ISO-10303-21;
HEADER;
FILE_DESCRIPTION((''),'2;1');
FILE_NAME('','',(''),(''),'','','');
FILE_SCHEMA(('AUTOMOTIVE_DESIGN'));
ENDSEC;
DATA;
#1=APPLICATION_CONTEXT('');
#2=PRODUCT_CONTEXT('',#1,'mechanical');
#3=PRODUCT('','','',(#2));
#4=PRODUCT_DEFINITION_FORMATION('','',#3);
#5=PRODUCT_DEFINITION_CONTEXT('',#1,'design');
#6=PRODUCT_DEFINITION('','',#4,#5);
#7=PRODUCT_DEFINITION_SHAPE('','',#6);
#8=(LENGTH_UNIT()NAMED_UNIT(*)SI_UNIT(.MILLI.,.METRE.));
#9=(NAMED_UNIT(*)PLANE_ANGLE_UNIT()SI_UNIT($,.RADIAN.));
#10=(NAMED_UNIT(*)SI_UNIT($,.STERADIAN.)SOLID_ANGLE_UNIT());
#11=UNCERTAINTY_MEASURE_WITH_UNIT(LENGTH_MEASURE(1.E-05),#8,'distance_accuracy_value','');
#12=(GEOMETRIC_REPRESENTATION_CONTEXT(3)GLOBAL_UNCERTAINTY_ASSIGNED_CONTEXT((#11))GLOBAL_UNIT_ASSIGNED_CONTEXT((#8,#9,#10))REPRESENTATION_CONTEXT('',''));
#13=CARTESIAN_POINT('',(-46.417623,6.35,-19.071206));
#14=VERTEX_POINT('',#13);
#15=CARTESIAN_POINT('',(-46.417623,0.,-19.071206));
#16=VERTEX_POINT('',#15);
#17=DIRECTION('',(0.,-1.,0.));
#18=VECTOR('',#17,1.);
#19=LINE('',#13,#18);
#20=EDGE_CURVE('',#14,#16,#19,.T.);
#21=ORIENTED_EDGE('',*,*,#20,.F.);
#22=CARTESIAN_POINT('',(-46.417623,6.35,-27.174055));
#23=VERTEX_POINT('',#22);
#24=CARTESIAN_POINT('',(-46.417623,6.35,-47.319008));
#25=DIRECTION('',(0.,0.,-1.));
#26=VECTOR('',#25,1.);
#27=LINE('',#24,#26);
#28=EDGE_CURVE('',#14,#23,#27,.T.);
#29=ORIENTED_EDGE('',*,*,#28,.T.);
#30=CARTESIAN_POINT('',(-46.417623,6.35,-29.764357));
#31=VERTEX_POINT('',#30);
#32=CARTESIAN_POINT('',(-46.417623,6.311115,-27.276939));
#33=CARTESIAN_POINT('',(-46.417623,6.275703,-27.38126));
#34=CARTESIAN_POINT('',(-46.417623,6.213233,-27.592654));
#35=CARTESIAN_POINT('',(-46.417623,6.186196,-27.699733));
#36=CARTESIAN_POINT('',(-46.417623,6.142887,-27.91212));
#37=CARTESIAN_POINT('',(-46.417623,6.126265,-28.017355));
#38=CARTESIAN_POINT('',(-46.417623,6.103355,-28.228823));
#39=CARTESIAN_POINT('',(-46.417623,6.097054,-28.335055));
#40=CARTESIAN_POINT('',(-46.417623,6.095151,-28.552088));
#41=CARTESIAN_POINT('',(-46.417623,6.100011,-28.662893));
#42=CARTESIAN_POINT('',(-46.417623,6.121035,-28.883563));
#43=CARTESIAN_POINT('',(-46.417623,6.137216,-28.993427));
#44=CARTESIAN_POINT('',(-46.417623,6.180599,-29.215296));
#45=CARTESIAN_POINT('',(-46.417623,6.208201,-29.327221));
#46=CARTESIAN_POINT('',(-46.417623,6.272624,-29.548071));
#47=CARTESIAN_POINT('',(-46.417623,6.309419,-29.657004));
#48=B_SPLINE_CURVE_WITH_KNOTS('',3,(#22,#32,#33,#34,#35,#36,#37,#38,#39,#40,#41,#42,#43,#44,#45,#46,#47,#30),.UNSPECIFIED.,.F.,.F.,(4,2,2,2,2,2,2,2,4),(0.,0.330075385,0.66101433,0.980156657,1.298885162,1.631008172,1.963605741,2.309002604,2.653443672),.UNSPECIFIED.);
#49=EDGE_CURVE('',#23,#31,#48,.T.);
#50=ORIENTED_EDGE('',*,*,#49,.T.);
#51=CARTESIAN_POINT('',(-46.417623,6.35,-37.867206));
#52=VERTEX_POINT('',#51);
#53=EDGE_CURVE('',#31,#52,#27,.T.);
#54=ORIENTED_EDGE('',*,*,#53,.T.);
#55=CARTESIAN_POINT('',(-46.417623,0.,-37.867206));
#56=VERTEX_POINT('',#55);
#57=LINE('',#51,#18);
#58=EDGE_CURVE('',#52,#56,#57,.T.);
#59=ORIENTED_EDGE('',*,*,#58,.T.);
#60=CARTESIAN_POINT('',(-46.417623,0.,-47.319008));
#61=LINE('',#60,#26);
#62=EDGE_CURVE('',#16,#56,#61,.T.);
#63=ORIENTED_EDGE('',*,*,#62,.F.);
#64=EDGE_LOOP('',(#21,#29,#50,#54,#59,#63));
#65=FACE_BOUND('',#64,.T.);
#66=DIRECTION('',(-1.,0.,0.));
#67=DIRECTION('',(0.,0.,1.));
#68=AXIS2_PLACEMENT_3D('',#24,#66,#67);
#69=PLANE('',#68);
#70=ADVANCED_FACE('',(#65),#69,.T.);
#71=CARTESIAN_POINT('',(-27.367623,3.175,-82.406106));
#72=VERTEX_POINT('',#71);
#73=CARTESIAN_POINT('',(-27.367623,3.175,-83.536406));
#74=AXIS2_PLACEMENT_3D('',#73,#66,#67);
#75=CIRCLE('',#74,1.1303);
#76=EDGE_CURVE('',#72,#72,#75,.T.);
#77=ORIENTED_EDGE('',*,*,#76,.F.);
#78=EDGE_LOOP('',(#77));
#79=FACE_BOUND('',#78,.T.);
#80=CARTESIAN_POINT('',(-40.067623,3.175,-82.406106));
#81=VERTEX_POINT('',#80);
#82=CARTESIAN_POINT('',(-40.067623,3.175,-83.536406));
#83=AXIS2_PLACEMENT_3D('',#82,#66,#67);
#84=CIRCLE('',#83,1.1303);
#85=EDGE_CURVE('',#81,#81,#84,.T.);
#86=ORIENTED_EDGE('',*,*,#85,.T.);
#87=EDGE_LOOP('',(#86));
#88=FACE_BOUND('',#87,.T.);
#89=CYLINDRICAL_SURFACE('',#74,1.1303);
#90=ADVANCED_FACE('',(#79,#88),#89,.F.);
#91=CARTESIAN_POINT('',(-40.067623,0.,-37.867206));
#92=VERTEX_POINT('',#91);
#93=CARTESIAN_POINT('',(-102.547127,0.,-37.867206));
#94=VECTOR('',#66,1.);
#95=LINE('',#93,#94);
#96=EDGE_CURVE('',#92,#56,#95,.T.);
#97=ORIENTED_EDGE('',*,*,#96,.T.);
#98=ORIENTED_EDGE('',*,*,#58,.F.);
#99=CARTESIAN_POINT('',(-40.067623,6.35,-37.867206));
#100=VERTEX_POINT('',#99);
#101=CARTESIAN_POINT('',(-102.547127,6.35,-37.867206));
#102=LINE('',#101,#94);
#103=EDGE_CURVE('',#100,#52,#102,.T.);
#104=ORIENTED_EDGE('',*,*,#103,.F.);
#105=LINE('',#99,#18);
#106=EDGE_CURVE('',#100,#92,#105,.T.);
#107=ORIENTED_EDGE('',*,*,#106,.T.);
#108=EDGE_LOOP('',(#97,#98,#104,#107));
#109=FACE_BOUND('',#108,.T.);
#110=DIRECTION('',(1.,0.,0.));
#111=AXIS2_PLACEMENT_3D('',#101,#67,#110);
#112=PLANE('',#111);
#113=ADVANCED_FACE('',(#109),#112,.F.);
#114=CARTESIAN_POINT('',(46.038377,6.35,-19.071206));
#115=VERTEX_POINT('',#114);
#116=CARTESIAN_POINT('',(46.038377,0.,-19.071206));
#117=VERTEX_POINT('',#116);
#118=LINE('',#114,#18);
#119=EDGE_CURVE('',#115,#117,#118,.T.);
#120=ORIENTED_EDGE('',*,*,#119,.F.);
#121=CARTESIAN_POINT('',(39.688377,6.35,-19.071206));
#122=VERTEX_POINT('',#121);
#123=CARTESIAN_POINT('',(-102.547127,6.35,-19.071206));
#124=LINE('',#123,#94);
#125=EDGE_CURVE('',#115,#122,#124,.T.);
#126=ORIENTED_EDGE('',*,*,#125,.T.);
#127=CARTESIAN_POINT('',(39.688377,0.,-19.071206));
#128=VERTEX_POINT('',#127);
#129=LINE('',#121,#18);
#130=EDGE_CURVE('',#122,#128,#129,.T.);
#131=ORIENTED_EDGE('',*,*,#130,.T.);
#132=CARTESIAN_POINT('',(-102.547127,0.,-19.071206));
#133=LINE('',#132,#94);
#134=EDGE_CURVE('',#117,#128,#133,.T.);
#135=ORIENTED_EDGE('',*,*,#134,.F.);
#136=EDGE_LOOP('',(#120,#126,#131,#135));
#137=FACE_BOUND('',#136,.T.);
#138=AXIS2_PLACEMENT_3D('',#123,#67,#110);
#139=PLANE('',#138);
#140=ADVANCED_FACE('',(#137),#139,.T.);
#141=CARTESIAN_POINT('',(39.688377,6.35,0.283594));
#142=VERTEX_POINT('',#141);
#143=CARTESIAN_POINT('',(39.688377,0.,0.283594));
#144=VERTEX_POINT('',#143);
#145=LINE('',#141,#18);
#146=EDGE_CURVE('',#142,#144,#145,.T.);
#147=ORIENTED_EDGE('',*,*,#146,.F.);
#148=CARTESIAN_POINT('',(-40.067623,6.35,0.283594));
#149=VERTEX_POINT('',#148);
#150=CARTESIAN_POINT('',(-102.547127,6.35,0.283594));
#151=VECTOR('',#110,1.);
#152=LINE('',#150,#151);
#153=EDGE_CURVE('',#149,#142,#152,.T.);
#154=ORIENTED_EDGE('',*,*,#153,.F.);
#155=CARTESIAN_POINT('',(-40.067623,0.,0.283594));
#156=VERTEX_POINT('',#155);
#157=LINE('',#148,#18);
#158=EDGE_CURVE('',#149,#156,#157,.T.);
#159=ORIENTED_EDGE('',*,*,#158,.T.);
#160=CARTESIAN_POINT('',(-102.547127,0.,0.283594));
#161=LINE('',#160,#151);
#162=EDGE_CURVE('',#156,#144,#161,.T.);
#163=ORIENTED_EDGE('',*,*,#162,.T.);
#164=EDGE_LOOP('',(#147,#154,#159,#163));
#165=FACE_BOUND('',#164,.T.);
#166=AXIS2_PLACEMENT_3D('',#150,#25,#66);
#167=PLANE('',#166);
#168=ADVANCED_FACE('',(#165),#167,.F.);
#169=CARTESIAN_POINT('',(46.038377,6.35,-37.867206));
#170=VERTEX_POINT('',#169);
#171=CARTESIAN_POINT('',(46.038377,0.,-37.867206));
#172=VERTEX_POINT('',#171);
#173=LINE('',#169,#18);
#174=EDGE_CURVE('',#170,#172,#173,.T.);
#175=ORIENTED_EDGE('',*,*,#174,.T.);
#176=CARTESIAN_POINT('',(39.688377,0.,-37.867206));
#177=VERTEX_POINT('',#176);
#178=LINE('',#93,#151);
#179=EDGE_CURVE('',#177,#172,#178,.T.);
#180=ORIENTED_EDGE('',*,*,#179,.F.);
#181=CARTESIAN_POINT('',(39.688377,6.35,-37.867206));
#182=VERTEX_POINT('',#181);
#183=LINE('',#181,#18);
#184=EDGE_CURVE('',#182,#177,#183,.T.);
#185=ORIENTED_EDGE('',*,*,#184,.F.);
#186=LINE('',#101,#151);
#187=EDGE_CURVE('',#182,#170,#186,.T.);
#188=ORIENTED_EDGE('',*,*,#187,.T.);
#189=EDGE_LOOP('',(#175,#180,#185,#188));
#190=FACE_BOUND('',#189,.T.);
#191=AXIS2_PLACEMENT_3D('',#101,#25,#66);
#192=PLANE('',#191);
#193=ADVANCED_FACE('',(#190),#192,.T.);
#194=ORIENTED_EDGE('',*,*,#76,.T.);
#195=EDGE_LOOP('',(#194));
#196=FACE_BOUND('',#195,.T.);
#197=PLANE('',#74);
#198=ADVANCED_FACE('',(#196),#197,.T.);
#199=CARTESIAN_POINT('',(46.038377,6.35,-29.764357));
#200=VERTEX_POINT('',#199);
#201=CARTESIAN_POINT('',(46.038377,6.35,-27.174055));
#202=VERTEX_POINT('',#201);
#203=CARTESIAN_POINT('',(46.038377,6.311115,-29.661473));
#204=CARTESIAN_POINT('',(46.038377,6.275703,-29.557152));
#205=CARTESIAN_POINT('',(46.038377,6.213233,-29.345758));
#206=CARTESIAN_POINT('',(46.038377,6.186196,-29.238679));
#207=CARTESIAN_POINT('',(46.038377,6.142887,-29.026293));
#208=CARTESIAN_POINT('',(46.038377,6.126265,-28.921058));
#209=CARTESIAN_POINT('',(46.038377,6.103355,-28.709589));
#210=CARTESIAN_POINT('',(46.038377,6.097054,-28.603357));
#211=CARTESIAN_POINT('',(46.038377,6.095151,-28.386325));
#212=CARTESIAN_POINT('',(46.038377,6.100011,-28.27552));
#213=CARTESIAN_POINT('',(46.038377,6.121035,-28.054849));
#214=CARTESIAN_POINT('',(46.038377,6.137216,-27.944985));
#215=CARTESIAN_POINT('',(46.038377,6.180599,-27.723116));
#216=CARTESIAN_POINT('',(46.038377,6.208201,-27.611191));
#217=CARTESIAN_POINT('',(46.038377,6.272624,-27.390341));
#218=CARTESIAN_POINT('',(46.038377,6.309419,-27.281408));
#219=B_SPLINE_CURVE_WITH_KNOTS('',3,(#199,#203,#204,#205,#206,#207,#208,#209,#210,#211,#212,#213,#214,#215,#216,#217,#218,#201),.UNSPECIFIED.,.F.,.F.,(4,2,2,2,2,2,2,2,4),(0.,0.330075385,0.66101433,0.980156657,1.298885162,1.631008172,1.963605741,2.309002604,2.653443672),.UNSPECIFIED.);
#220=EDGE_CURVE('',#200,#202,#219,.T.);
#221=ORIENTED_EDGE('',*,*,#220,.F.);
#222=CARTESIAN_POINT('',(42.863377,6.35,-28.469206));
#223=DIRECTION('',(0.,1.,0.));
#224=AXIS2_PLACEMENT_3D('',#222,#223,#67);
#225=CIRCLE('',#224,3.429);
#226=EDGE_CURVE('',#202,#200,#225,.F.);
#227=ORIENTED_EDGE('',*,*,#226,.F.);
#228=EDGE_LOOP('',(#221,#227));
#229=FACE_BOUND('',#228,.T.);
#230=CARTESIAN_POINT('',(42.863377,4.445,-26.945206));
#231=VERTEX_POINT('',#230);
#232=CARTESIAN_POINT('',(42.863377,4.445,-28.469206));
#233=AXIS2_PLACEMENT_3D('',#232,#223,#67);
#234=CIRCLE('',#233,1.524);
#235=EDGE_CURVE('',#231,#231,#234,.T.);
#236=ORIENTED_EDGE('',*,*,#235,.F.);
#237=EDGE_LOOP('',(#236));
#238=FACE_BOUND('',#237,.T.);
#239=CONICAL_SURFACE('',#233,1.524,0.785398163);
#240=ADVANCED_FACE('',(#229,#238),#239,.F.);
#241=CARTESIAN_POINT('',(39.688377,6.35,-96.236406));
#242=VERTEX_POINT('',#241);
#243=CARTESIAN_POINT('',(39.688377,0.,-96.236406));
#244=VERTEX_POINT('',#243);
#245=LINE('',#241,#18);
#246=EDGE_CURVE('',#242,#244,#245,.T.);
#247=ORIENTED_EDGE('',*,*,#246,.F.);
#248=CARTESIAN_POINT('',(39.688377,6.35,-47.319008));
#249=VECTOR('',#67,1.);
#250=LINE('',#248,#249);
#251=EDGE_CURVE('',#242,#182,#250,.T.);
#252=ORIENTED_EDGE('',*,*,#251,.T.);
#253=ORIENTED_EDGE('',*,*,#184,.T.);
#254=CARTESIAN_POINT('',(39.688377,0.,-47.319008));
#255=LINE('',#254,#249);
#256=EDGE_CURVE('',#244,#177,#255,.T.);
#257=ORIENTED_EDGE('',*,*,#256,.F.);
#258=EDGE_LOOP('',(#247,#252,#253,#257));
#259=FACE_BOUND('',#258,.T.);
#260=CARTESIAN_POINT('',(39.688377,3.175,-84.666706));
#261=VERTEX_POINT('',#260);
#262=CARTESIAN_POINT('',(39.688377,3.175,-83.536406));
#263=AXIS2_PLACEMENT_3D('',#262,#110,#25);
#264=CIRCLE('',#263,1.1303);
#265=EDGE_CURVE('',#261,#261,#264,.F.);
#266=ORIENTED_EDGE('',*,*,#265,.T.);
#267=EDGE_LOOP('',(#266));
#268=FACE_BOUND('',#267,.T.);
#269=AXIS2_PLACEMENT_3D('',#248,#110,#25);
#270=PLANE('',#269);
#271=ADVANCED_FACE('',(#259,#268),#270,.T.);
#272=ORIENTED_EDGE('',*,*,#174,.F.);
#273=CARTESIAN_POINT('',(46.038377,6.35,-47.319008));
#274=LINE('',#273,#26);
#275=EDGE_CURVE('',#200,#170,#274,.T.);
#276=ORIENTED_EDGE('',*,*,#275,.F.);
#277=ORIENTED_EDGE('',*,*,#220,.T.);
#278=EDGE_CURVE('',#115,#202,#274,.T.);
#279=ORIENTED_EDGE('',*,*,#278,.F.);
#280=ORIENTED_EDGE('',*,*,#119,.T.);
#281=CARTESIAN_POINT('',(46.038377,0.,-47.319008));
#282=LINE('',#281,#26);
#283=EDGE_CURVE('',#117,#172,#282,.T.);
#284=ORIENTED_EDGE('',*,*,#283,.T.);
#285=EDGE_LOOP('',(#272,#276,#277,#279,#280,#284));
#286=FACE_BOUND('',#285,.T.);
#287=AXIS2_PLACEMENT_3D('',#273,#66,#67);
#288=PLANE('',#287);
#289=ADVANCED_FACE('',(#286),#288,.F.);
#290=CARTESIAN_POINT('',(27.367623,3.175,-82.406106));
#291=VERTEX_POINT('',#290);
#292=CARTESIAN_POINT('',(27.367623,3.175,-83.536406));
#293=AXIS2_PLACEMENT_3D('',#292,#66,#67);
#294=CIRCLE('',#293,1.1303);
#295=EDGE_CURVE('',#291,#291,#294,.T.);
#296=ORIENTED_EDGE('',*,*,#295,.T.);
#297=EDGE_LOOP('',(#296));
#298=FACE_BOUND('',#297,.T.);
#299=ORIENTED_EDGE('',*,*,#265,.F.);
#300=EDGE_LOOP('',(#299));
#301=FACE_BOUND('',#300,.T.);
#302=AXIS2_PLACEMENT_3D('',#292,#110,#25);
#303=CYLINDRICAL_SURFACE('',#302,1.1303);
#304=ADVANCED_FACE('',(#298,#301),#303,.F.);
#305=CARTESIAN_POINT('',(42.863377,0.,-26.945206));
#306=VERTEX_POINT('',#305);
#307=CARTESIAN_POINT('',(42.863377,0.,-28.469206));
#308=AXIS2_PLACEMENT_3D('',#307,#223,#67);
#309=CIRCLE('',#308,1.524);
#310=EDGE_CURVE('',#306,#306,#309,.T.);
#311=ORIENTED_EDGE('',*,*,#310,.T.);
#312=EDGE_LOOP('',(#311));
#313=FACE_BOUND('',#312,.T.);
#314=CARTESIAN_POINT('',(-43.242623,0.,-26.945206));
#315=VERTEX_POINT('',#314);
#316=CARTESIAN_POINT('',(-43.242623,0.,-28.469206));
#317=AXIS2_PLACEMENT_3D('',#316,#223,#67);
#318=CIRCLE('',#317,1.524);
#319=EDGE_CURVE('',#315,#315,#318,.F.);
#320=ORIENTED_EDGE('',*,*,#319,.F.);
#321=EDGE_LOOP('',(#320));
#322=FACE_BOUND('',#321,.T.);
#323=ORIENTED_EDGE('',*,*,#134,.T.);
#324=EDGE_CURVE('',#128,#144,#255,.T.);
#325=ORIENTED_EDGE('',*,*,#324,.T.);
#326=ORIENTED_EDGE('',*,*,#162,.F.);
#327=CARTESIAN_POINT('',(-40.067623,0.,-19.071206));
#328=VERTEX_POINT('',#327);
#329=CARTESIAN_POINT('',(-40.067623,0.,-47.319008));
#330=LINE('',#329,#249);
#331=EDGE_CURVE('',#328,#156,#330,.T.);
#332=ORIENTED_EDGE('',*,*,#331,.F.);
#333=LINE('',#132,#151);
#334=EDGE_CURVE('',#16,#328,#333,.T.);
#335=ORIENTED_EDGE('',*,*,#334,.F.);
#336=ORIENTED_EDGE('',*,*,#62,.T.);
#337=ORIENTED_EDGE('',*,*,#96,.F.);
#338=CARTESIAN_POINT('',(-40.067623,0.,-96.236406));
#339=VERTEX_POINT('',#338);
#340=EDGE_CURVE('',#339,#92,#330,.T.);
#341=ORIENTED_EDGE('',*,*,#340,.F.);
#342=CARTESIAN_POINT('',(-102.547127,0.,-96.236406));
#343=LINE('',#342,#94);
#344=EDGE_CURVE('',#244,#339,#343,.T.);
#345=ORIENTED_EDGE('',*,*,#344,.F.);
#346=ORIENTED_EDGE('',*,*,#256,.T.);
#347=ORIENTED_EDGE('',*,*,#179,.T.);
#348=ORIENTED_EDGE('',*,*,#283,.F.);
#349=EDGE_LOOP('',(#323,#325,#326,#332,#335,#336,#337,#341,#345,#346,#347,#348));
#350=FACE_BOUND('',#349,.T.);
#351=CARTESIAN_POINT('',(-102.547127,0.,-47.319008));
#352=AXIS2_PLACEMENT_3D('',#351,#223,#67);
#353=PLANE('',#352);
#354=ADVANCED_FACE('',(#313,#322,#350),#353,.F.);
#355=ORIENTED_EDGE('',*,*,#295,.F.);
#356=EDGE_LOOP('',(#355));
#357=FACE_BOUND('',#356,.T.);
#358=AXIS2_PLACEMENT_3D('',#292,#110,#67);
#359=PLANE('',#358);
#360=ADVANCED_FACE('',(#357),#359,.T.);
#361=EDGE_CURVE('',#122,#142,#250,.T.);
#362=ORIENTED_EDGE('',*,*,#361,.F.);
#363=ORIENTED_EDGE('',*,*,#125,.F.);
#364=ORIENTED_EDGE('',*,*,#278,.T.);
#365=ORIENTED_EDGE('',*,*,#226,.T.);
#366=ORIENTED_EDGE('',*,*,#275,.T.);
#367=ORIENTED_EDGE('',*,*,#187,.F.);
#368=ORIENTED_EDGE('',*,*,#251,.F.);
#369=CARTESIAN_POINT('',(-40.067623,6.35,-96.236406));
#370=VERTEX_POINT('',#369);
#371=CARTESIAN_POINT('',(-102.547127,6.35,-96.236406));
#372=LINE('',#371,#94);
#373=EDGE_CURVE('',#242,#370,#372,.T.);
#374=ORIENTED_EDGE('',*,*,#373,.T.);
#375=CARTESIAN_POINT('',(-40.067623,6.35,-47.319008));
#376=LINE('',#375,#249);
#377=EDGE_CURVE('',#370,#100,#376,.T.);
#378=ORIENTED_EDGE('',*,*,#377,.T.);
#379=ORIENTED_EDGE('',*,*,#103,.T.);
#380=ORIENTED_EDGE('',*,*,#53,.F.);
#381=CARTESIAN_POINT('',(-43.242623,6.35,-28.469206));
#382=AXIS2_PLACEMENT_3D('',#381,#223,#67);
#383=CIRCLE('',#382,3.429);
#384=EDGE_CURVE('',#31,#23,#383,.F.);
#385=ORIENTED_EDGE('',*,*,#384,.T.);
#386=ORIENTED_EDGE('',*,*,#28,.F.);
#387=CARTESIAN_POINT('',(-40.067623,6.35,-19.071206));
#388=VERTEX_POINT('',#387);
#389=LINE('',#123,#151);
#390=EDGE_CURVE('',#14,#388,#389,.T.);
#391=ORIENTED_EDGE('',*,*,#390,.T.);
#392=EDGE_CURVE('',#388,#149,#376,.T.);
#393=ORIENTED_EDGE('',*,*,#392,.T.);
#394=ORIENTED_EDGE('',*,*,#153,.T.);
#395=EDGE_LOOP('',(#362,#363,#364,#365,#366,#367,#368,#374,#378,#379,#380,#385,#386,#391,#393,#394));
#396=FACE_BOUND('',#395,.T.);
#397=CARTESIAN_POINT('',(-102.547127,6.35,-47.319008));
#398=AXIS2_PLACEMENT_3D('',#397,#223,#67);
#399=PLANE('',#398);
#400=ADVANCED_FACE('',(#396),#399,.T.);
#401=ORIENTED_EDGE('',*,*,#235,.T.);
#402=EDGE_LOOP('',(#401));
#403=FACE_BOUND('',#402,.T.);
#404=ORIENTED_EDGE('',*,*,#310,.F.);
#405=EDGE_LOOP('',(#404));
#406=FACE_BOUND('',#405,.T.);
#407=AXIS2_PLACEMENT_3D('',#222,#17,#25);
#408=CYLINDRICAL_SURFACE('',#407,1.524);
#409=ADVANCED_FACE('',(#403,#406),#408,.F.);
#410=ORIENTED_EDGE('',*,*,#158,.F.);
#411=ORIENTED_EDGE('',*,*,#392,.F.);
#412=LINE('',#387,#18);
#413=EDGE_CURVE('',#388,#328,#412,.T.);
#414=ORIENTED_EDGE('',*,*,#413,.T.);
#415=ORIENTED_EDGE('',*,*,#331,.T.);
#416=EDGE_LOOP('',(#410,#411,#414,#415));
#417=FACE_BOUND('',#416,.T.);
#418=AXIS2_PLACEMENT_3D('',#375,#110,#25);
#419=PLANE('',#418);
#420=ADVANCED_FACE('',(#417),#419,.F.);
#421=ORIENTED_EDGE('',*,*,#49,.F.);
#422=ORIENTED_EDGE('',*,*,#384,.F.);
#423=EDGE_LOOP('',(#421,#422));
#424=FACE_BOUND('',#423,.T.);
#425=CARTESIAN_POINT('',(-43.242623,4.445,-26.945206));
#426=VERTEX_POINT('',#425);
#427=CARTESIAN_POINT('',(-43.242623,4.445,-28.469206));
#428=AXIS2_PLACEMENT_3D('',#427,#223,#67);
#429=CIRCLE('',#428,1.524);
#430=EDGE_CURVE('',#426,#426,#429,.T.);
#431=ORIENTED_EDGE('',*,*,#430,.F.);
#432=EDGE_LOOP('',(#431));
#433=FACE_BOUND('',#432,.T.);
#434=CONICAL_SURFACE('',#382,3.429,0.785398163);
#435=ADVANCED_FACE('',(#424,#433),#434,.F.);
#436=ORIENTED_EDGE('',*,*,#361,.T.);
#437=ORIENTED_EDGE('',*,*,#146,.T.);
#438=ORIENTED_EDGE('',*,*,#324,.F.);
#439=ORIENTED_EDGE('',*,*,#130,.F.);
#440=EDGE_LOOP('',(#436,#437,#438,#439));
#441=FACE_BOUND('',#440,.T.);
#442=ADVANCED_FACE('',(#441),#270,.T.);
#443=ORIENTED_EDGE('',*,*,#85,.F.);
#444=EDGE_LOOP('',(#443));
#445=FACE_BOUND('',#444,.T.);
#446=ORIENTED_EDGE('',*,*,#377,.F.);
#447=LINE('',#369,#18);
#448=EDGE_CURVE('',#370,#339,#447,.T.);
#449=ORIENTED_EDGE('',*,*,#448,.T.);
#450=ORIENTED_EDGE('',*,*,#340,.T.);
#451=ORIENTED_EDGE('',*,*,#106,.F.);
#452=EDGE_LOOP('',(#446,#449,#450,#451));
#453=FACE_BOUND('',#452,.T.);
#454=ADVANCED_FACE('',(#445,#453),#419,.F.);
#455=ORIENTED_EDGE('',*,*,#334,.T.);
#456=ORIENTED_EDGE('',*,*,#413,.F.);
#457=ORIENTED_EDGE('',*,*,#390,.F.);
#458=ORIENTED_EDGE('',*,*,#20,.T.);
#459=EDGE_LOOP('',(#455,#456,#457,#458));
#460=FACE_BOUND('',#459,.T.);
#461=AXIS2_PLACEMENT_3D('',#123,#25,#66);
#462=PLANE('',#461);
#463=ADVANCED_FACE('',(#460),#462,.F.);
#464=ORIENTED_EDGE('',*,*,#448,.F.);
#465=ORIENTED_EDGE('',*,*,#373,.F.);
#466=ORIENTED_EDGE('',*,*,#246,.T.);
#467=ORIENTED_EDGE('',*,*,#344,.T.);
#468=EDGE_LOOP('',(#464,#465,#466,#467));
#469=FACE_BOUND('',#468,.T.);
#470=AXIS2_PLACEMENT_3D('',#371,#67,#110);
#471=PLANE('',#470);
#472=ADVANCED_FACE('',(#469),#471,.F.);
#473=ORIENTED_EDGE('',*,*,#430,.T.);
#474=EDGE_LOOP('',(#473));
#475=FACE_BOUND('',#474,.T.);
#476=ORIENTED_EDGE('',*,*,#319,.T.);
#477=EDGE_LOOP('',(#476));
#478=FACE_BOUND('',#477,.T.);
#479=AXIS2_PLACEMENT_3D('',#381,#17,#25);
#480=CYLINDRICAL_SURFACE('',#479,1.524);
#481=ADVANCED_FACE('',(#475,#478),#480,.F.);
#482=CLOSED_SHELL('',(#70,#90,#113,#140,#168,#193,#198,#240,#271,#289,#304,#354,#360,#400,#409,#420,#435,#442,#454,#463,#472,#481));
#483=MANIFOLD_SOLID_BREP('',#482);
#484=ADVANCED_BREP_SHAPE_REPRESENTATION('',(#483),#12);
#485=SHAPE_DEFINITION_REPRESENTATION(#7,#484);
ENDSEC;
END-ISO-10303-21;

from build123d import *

# Parameters (mm, degrees)
SKETCH1_R           = 1.524
BOSS_EXTRUDE1_DEPTH = 6.35
CHAMFER1_SIZE       = 1.905
SKETCH2_R           = 1.1303
CUT_EXTRUDE1_DEPTH  = 12.7


with BuildPart() as part:
    # Sketch1 → Boss-Extrude1 (new body)
    with BuildSketch(Plane(origin=(0, 0, 0), x_dir=(1, 0, 0), z_dir=(0, 1, 0))):
        Polygon((39.688377001, 76.199995009), (39.688377001, 96.236406132), (-40.067622999, 96.236406132), (-40.067622999, 76.199995009), (-40.067622999, 57.403995009), (-40.067622999, 37.867206132), (-46.417622999, 37.867206132), (-46.417622999, 19.071206132), (-40.067622999, 19.071206132), (-40.067622999, -0.283593868), (39.688377001, -0.283593868), (39.688377001, 19.071206132), (46.038377001, 19.071206132), (46.038377001, 37.867206132), (39.688377001, 37.867206132), (39.688377001, 57.403995009), align=None)
        with Locations(Location((-43.242622999, 28.469206132, 0), (0, 0, 270))):
            Circle(SKETCH1_R, mode=Mode.SUBTRACT)
        with Locations(Location((42.863377001, 28.469206132, 0), (0, 0, 270))):
            Circle(SKETCH1_R, mode=Mode.SUBTRACT)
    extrude(amount=BOSS_EXTRUDE1_DEPTH)

    # Chamfer1
    # the kernel refuses this chamfer: 1.905 mm, written as the material it takes off along each edge
    with BuildSketch(Plane(origin=(42.863377001, 6.35, -28.469206132), x_dir=(0, 0, 1), z_dir=(-1, 0, 0))) as chamfer1_piece_1:
        Polygon((1.524 + CHAMFER1_SIZE, 0), (1.524, -CHAMFER1_SIZE), (1.524, 0), align=None)
    revolve(axis=Axis((42.863377001, 6.35, -28.469206132), (0, 1, 0)), mode=Mode.SUBTRACT)
    with BuildSketch(Plane(origin=(-43.242622999, 6.35, -28.469206132), x_dir=(0, 0, 1), z_dir=(-1, 0, 0))) as chamfer1_piece_2:
        Polygon((1.524 + CHAMFER1_SIZE, 0), (1.524, -CHAMFER1_SIZE), (1.524, 0), align=None)
    revolve(axis=Axis((-43.242622999, 6.35, -28.469206132), (0, 1, 0)), mode=Mode.SUBTRACT)

    # Sketch2 → Cut-Extrude1 (cut)
    with BuildSketch(Plane.ZY.offset(40.067622999)):
        with Locations((-83.536406132, 3.175)):
            Circle(SKETCH2_R)
    cut_extrude1 = extrude(amount=-CUT_EXTRUDE1_DEPTH, mode=Mode.SUBTRACT)

    # Mirror5: Cut-Extrude1 across plane
    add(cut_extrude1.mirror(Plane(origin=(0, 0, 0), x_dir=(0, 0, 1), z_dir=(1, 0, 0))), mode=Mode.SUBTRACT)


solid = part.part
